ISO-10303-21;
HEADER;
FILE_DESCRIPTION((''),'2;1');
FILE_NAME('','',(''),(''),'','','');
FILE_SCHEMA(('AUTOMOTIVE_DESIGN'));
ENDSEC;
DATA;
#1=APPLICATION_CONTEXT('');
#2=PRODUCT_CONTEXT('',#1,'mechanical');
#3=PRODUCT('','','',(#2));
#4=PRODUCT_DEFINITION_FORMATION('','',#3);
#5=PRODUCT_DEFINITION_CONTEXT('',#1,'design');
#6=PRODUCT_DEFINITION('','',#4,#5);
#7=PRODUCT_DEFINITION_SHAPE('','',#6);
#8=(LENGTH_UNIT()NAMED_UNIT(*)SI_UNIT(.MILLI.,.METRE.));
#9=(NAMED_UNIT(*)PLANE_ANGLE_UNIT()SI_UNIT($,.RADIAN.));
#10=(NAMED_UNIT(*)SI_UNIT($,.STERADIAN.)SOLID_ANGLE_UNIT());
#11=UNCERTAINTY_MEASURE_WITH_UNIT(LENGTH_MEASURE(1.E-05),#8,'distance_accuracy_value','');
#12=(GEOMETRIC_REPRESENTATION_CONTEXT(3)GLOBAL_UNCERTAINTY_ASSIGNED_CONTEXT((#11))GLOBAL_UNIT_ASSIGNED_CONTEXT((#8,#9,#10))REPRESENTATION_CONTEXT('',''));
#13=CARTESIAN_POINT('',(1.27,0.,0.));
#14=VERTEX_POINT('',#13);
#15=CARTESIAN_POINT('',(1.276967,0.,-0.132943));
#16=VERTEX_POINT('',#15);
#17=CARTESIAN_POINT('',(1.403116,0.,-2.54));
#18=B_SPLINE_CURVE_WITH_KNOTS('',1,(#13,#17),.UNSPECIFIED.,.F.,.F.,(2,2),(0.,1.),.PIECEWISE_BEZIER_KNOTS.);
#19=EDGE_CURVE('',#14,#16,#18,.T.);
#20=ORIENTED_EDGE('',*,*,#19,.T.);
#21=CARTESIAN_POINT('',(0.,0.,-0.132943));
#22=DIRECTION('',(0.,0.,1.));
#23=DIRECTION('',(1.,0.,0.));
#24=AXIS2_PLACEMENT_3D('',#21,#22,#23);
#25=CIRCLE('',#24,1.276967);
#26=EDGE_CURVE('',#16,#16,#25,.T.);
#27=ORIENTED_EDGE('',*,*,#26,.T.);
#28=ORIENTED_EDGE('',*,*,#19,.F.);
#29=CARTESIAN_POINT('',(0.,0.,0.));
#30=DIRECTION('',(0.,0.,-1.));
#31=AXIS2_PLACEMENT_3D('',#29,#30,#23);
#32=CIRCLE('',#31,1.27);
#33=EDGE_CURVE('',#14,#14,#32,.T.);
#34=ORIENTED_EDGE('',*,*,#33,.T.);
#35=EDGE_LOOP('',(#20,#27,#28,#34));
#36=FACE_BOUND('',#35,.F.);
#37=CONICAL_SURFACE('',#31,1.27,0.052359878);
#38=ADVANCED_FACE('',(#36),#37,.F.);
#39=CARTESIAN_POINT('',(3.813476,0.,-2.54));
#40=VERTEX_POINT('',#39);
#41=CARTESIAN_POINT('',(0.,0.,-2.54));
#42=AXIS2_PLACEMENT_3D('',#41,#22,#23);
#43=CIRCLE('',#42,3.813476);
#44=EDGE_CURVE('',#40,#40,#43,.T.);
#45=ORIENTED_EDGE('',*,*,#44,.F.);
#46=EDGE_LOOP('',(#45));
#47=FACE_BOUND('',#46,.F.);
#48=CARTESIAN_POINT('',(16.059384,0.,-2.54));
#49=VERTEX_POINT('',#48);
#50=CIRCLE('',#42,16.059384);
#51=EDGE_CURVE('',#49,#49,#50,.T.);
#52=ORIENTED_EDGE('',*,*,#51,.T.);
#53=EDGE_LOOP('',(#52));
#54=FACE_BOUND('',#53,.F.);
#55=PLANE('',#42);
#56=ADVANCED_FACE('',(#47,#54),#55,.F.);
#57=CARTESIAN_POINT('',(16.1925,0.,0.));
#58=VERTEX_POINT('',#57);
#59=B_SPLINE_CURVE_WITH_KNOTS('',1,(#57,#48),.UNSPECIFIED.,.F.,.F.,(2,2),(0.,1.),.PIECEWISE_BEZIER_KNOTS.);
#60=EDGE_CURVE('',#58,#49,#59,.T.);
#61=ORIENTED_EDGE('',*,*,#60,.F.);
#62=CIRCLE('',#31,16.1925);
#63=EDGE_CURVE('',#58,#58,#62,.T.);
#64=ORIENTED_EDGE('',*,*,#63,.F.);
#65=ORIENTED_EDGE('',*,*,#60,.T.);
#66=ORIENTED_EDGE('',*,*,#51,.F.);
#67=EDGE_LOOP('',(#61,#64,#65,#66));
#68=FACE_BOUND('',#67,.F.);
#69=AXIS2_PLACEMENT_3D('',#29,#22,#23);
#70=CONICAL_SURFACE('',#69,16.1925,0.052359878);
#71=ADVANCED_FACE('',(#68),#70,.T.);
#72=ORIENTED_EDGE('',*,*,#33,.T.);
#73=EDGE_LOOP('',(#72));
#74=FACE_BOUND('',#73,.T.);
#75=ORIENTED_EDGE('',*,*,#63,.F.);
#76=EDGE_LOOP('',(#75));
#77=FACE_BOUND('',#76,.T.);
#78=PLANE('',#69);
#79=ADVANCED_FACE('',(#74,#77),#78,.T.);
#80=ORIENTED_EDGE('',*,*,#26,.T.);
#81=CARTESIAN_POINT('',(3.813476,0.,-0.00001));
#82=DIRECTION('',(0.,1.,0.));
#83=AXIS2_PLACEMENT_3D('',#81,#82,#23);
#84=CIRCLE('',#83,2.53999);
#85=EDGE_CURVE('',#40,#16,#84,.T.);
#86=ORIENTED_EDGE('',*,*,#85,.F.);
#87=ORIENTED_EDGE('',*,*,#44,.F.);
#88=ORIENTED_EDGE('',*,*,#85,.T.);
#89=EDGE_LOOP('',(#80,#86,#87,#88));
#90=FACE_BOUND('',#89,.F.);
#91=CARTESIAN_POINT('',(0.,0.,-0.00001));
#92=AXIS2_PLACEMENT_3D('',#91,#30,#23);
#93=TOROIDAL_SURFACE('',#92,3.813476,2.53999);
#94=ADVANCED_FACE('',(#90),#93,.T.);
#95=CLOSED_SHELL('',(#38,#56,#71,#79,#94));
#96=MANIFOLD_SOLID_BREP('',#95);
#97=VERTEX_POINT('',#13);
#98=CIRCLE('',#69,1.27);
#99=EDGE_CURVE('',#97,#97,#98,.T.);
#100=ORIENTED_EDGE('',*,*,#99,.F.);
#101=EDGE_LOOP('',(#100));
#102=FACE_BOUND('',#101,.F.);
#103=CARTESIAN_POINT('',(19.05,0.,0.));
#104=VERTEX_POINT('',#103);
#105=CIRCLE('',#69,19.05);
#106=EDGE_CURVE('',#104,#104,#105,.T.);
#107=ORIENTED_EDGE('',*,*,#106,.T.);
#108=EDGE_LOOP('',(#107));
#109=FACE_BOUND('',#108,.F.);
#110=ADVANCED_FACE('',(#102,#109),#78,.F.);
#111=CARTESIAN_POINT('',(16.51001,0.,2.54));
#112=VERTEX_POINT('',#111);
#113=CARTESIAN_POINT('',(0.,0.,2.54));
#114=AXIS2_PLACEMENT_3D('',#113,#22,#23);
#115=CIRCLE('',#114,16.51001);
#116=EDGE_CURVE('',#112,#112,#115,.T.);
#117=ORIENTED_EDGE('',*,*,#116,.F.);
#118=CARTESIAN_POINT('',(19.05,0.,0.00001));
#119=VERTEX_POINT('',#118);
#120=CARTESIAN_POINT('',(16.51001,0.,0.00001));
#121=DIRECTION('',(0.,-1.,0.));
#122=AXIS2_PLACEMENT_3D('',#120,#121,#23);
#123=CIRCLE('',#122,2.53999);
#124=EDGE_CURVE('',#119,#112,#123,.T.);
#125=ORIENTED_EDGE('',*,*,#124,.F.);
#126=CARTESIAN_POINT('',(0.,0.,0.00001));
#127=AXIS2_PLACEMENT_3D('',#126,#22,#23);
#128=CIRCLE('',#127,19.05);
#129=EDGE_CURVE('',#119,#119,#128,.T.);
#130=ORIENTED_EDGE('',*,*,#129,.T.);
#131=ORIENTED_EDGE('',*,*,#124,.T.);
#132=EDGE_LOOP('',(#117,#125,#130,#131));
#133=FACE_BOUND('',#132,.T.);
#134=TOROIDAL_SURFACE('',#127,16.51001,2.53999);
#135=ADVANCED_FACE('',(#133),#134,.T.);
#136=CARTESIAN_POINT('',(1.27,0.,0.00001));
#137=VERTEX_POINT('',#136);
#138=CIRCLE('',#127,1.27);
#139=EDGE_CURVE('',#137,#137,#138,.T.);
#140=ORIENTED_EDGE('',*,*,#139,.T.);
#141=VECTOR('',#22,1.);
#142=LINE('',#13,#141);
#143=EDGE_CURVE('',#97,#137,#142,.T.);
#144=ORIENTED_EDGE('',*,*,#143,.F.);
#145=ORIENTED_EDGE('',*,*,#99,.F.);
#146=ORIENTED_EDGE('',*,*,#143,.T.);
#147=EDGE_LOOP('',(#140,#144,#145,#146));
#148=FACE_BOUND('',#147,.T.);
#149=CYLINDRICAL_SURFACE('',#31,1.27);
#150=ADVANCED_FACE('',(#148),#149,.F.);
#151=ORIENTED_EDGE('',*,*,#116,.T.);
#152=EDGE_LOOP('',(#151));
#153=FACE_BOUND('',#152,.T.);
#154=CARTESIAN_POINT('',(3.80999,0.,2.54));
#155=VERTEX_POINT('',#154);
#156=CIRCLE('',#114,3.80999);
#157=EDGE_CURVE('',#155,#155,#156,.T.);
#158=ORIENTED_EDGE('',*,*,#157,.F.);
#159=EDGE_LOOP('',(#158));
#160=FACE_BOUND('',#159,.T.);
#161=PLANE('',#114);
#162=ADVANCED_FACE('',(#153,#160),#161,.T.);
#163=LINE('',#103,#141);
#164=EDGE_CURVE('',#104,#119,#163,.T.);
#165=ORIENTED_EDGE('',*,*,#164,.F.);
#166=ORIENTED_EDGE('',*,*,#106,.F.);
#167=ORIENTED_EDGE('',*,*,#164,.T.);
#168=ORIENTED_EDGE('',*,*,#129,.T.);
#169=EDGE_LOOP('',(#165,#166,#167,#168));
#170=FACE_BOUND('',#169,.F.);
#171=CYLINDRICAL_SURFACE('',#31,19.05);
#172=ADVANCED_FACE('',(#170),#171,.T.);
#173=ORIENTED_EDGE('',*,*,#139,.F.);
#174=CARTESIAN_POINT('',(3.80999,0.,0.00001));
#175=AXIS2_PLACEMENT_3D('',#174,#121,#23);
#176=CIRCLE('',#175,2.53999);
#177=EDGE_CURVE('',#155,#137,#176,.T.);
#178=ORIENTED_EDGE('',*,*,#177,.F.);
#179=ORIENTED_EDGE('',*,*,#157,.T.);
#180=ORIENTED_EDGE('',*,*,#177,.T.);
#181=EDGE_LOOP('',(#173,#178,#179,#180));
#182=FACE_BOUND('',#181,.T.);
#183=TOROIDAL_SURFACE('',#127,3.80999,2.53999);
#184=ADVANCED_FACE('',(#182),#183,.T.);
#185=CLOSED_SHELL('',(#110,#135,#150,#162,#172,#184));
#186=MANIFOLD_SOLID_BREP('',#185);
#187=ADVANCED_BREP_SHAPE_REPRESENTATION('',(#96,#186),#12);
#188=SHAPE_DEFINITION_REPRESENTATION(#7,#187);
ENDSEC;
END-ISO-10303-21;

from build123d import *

# Parameters (mm, degrees)
F0_R     = 19.05
F0_R_2   = 16.1925
F0_R_3   = 1.27
F1_DEPTH = 2.54
F2_DEPTH = 2.54
F2_TAPER = 3
F3_R     = 2.53999
F4_R     = 2.53999
F4_2_R   = 2.53999


# Not quite as in the source:
# - a fillet or chamfer is up to 0.001 mm smaller than in the source, because OpenCascade refuses the exact size


with BuildPart() as f1:
    # F0 (on Top) → F1 (new body)
    with BuildSketch(Plane.XY):
        Circle(F0_R)
        Circle(F0_R_2, mode=Mode.SUBTRACT)
        Circle(F0_R_2)
        Circle(F0_R_3, mode=Mode.SUBTRACT)
    extrude(amount=F1_DEPTH)

    # F3 (radius 2.54 in the source; OpenCascade refuses exactly that, so slightly less here)
    f3_edges = [f1.edges().sort_by_distance(p)[0] for p in [
        (-19.05, 0, 2.54),
    ]]
    fillet(f3_edges, radius=F3_R)

    # F4 (radius 2.54 in the source; OpenCascade refuses exactly that, so slightly less here)
    f4_edges = [f1.edges().sort_by_distance(p)[0] for p in [
        (-1.27, 0, 2.54),
    ]]
    fillet(f4_edges, radius=F4_R)


with BuildPart() as f2:
    # F0 (on Top) → F2 (new body)
    with BuildSketch(Plane.XY):
        Circle(F0_R_2)
        Circle(F0_R_3, mode=Mode.SUBTRACT)
    extrude(amount=-F2_DEPTH, taper=F2_TAPER)

    # F4#2 (radius 2.54 in the source; OpenCascade refuses exactly that, so slightly less here)
    f4_2_edges = [f2.edges().sort_by_distance(p)[0] for p in [
        (-1.403116, 0, -2.54),
    ]]
    fillet(f4_2_edges, radius=F4_2_R)


solid = Compound([f1.part, f2.part])
